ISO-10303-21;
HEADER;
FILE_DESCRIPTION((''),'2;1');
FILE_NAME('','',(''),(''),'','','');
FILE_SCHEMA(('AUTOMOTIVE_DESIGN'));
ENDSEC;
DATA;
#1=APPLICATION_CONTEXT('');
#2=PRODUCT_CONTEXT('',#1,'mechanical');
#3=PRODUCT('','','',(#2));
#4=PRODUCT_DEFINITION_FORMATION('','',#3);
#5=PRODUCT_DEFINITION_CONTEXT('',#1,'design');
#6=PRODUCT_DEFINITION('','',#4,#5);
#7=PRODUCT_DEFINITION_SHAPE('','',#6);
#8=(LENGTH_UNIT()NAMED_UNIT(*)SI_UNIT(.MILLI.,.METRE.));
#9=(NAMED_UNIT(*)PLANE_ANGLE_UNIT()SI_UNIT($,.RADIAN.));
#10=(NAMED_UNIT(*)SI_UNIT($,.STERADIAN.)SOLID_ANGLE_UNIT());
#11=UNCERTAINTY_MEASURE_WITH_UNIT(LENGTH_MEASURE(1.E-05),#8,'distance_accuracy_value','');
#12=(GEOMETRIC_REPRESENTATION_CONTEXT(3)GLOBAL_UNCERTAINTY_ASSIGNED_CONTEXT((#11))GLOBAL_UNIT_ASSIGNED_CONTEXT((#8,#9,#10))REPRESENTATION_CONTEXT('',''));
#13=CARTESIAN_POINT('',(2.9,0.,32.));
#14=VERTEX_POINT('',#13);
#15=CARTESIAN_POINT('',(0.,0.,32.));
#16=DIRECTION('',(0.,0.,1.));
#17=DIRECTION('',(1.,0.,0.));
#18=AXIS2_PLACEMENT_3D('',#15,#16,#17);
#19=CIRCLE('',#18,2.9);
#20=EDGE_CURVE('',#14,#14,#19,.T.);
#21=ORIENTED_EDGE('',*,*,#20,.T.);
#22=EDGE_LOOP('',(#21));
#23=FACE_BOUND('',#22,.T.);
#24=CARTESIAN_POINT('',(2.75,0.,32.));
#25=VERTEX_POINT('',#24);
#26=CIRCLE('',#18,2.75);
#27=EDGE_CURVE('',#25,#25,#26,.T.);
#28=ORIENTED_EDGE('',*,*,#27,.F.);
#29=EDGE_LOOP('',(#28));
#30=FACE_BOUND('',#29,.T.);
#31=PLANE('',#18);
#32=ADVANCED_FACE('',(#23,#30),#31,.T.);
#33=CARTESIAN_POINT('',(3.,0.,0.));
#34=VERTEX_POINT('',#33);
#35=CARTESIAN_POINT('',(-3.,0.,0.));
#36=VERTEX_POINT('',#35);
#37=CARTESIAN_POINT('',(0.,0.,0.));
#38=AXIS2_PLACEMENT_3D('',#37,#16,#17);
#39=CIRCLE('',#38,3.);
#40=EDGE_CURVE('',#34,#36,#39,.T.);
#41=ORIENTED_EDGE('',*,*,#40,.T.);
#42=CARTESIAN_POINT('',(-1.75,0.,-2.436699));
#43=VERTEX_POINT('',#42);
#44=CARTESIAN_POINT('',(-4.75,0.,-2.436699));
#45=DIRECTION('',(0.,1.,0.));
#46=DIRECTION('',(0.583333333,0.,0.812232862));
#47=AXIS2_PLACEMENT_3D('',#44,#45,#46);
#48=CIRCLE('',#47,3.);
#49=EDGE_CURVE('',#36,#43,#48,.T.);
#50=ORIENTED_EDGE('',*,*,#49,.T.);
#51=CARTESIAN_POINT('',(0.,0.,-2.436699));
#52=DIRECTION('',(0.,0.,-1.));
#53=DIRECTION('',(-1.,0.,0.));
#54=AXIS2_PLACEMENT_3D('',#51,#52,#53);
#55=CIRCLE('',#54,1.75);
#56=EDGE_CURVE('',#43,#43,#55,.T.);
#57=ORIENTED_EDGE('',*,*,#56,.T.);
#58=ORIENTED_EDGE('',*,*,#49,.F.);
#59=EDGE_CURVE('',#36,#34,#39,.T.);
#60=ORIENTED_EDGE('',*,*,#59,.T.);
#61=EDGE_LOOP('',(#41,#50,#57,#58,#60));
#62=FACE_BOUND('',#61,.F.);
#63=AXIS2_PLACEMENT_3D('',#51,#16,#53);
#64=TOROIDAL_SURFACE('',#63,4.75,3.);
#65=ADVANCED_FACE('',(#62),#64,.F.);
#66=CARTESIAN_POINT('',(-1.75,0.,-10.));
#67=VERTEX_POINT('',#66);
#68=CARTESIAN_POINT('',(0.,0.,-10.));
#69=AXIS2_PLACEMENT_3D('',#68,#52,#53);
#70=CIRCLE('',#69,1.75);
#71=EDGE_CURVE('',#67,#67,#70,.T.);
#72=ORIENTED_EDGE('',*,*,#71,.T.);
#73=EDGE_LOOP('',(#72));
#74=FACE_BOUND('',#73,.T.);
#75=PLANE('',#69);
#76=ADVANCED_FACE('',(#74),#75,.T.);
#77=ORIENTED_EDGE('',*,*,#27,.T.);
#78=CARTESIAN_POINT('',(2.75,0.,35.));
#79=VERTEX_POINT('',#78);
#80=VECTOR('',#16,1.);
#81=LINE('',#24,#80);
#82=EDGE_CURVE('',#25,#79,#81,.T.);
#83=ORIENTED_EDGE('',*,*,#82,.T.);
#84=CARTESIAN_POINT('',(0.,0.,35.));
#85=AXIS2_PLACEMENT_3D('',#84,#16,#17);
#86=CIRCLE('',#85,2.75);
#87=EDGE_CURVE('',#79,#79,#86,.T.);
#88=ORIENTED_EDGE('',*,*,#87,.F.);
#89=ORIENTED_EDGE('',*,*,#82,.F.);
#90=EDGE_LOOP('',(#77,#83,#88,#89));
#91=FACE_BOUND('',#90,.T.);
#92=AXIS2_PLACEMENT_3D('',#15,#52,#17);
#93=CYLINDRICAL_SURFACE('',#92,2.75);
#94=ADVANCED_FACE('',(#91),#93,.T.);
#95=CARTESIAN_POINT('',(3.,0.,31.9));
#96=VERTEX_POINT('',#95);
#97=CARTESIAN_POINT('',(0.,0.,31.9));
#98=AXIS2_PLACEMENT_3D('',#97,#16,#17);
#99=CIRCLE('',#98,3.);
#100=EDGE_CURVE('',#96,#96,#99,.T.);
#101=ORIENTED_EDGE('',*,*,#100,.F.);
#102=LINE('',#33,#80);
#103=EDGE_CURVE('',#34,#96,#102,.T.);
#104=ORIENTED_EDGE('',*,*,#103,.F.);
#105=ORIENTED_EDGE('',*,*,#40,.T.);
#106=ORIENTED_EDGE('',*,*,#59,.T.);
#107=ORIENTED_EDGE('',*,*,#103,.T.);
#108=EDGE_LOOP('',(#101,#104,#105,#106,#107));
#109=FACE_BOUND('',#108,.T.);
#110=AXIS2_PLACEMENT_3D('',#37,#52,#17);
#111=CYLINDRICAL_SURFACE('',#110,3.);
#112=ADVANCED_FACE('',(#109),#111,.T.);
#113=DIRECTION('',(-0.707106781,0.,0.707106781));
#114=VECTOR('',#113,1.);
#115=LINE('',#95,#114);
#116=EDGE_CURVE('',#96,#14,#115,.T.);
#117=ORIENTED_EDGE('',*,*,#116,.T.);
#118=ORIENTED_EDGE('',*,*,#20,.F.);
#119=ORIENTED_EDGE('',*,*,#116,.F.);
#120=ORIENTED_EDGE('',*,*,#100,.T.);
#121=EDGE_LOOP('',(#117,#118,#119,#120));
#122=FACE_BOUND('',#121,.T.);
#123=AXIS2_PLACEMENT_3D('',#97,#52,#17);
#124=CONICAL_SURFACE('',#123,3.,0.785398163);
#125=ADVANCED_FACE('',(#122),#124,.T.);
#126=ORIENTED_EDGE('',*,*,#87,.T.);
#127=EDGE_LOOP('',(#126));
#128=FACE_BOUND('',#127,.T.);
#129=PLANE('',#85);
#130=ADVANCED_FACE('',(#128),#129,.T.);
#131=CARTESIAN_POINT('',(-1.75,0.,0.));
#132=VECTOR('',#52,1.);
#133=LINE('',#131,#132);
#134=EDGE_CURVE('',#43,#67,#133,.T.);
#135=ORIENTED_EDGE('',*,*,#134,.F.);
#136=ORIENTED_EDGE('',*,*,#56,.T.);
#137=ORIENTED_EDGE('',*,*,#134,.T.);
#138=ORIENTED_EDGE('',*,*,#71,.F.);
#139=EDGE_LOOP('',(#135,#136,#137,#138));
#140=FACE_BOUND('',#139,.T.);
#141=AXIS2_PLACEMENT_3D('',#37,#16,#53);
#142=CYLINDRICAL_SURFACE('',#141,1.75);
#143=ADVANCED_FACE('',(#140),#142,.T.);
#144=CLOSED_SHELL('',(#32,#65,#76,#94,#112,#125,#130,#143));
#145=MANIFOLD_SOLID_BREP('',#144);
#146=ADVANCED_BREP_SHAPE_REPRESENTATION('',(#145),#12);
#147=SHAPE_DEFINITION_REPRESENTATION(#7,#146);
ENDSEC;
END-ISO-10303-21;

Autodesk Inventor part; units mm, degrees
ref_plane "YZ Plane" through (0, 0, 0) normal (1, 0, 0) x (0, 1, 0)
ref_plane "XZ Plane" through (0, 0, 0) normal (0, 1, 0) x (-1, 0, 0)
ref_plane "XY Plane" through (0, 0, 0) normal (0, 0, 1) x (1, 0, 0)
sketch "Sketch1" plane through (0, 0, 0) normal (0, 0, 1) x (1, 0, 0)
  circle A0 centre (0, 0) radius 3
  dimension "d0" = 6
extrude "Extrusion1" add sketch "Sketch1" along normal blind 32
sketch "Sketch2" plane through (0, 0, 32) normal (0, 0, 1) x (1, 0, 0)
  circle A0 centre (0, 0) radius 2.75
  dimension "d3" = 5.5
extrude "Extrusion2" add sketch "Sketch2" along normal blind 3
sketch "Sketch3" plane through (0, 0, 0) normal (0, 0, -1) x (-1, 0, 0)
  circle A0 centre (0, 0) radius 1.75
  dimension "d6" = 3.5
extrude "Extrusion3" add sketch "Sketch3" along normal blind 10
fillet "Fillet1" radius 3 1 edges at (1.75, 0, 0)
thread "Thread1" size "M6x0.7" class "6g" standard "ANSI Metric M Profile" full length
chamfer "Chamfer1" distance 0.1 angle 45 1 edges at (-3, 0, 32)
properties part number "6mm Inductive Probe" material "Stainless Steel"
